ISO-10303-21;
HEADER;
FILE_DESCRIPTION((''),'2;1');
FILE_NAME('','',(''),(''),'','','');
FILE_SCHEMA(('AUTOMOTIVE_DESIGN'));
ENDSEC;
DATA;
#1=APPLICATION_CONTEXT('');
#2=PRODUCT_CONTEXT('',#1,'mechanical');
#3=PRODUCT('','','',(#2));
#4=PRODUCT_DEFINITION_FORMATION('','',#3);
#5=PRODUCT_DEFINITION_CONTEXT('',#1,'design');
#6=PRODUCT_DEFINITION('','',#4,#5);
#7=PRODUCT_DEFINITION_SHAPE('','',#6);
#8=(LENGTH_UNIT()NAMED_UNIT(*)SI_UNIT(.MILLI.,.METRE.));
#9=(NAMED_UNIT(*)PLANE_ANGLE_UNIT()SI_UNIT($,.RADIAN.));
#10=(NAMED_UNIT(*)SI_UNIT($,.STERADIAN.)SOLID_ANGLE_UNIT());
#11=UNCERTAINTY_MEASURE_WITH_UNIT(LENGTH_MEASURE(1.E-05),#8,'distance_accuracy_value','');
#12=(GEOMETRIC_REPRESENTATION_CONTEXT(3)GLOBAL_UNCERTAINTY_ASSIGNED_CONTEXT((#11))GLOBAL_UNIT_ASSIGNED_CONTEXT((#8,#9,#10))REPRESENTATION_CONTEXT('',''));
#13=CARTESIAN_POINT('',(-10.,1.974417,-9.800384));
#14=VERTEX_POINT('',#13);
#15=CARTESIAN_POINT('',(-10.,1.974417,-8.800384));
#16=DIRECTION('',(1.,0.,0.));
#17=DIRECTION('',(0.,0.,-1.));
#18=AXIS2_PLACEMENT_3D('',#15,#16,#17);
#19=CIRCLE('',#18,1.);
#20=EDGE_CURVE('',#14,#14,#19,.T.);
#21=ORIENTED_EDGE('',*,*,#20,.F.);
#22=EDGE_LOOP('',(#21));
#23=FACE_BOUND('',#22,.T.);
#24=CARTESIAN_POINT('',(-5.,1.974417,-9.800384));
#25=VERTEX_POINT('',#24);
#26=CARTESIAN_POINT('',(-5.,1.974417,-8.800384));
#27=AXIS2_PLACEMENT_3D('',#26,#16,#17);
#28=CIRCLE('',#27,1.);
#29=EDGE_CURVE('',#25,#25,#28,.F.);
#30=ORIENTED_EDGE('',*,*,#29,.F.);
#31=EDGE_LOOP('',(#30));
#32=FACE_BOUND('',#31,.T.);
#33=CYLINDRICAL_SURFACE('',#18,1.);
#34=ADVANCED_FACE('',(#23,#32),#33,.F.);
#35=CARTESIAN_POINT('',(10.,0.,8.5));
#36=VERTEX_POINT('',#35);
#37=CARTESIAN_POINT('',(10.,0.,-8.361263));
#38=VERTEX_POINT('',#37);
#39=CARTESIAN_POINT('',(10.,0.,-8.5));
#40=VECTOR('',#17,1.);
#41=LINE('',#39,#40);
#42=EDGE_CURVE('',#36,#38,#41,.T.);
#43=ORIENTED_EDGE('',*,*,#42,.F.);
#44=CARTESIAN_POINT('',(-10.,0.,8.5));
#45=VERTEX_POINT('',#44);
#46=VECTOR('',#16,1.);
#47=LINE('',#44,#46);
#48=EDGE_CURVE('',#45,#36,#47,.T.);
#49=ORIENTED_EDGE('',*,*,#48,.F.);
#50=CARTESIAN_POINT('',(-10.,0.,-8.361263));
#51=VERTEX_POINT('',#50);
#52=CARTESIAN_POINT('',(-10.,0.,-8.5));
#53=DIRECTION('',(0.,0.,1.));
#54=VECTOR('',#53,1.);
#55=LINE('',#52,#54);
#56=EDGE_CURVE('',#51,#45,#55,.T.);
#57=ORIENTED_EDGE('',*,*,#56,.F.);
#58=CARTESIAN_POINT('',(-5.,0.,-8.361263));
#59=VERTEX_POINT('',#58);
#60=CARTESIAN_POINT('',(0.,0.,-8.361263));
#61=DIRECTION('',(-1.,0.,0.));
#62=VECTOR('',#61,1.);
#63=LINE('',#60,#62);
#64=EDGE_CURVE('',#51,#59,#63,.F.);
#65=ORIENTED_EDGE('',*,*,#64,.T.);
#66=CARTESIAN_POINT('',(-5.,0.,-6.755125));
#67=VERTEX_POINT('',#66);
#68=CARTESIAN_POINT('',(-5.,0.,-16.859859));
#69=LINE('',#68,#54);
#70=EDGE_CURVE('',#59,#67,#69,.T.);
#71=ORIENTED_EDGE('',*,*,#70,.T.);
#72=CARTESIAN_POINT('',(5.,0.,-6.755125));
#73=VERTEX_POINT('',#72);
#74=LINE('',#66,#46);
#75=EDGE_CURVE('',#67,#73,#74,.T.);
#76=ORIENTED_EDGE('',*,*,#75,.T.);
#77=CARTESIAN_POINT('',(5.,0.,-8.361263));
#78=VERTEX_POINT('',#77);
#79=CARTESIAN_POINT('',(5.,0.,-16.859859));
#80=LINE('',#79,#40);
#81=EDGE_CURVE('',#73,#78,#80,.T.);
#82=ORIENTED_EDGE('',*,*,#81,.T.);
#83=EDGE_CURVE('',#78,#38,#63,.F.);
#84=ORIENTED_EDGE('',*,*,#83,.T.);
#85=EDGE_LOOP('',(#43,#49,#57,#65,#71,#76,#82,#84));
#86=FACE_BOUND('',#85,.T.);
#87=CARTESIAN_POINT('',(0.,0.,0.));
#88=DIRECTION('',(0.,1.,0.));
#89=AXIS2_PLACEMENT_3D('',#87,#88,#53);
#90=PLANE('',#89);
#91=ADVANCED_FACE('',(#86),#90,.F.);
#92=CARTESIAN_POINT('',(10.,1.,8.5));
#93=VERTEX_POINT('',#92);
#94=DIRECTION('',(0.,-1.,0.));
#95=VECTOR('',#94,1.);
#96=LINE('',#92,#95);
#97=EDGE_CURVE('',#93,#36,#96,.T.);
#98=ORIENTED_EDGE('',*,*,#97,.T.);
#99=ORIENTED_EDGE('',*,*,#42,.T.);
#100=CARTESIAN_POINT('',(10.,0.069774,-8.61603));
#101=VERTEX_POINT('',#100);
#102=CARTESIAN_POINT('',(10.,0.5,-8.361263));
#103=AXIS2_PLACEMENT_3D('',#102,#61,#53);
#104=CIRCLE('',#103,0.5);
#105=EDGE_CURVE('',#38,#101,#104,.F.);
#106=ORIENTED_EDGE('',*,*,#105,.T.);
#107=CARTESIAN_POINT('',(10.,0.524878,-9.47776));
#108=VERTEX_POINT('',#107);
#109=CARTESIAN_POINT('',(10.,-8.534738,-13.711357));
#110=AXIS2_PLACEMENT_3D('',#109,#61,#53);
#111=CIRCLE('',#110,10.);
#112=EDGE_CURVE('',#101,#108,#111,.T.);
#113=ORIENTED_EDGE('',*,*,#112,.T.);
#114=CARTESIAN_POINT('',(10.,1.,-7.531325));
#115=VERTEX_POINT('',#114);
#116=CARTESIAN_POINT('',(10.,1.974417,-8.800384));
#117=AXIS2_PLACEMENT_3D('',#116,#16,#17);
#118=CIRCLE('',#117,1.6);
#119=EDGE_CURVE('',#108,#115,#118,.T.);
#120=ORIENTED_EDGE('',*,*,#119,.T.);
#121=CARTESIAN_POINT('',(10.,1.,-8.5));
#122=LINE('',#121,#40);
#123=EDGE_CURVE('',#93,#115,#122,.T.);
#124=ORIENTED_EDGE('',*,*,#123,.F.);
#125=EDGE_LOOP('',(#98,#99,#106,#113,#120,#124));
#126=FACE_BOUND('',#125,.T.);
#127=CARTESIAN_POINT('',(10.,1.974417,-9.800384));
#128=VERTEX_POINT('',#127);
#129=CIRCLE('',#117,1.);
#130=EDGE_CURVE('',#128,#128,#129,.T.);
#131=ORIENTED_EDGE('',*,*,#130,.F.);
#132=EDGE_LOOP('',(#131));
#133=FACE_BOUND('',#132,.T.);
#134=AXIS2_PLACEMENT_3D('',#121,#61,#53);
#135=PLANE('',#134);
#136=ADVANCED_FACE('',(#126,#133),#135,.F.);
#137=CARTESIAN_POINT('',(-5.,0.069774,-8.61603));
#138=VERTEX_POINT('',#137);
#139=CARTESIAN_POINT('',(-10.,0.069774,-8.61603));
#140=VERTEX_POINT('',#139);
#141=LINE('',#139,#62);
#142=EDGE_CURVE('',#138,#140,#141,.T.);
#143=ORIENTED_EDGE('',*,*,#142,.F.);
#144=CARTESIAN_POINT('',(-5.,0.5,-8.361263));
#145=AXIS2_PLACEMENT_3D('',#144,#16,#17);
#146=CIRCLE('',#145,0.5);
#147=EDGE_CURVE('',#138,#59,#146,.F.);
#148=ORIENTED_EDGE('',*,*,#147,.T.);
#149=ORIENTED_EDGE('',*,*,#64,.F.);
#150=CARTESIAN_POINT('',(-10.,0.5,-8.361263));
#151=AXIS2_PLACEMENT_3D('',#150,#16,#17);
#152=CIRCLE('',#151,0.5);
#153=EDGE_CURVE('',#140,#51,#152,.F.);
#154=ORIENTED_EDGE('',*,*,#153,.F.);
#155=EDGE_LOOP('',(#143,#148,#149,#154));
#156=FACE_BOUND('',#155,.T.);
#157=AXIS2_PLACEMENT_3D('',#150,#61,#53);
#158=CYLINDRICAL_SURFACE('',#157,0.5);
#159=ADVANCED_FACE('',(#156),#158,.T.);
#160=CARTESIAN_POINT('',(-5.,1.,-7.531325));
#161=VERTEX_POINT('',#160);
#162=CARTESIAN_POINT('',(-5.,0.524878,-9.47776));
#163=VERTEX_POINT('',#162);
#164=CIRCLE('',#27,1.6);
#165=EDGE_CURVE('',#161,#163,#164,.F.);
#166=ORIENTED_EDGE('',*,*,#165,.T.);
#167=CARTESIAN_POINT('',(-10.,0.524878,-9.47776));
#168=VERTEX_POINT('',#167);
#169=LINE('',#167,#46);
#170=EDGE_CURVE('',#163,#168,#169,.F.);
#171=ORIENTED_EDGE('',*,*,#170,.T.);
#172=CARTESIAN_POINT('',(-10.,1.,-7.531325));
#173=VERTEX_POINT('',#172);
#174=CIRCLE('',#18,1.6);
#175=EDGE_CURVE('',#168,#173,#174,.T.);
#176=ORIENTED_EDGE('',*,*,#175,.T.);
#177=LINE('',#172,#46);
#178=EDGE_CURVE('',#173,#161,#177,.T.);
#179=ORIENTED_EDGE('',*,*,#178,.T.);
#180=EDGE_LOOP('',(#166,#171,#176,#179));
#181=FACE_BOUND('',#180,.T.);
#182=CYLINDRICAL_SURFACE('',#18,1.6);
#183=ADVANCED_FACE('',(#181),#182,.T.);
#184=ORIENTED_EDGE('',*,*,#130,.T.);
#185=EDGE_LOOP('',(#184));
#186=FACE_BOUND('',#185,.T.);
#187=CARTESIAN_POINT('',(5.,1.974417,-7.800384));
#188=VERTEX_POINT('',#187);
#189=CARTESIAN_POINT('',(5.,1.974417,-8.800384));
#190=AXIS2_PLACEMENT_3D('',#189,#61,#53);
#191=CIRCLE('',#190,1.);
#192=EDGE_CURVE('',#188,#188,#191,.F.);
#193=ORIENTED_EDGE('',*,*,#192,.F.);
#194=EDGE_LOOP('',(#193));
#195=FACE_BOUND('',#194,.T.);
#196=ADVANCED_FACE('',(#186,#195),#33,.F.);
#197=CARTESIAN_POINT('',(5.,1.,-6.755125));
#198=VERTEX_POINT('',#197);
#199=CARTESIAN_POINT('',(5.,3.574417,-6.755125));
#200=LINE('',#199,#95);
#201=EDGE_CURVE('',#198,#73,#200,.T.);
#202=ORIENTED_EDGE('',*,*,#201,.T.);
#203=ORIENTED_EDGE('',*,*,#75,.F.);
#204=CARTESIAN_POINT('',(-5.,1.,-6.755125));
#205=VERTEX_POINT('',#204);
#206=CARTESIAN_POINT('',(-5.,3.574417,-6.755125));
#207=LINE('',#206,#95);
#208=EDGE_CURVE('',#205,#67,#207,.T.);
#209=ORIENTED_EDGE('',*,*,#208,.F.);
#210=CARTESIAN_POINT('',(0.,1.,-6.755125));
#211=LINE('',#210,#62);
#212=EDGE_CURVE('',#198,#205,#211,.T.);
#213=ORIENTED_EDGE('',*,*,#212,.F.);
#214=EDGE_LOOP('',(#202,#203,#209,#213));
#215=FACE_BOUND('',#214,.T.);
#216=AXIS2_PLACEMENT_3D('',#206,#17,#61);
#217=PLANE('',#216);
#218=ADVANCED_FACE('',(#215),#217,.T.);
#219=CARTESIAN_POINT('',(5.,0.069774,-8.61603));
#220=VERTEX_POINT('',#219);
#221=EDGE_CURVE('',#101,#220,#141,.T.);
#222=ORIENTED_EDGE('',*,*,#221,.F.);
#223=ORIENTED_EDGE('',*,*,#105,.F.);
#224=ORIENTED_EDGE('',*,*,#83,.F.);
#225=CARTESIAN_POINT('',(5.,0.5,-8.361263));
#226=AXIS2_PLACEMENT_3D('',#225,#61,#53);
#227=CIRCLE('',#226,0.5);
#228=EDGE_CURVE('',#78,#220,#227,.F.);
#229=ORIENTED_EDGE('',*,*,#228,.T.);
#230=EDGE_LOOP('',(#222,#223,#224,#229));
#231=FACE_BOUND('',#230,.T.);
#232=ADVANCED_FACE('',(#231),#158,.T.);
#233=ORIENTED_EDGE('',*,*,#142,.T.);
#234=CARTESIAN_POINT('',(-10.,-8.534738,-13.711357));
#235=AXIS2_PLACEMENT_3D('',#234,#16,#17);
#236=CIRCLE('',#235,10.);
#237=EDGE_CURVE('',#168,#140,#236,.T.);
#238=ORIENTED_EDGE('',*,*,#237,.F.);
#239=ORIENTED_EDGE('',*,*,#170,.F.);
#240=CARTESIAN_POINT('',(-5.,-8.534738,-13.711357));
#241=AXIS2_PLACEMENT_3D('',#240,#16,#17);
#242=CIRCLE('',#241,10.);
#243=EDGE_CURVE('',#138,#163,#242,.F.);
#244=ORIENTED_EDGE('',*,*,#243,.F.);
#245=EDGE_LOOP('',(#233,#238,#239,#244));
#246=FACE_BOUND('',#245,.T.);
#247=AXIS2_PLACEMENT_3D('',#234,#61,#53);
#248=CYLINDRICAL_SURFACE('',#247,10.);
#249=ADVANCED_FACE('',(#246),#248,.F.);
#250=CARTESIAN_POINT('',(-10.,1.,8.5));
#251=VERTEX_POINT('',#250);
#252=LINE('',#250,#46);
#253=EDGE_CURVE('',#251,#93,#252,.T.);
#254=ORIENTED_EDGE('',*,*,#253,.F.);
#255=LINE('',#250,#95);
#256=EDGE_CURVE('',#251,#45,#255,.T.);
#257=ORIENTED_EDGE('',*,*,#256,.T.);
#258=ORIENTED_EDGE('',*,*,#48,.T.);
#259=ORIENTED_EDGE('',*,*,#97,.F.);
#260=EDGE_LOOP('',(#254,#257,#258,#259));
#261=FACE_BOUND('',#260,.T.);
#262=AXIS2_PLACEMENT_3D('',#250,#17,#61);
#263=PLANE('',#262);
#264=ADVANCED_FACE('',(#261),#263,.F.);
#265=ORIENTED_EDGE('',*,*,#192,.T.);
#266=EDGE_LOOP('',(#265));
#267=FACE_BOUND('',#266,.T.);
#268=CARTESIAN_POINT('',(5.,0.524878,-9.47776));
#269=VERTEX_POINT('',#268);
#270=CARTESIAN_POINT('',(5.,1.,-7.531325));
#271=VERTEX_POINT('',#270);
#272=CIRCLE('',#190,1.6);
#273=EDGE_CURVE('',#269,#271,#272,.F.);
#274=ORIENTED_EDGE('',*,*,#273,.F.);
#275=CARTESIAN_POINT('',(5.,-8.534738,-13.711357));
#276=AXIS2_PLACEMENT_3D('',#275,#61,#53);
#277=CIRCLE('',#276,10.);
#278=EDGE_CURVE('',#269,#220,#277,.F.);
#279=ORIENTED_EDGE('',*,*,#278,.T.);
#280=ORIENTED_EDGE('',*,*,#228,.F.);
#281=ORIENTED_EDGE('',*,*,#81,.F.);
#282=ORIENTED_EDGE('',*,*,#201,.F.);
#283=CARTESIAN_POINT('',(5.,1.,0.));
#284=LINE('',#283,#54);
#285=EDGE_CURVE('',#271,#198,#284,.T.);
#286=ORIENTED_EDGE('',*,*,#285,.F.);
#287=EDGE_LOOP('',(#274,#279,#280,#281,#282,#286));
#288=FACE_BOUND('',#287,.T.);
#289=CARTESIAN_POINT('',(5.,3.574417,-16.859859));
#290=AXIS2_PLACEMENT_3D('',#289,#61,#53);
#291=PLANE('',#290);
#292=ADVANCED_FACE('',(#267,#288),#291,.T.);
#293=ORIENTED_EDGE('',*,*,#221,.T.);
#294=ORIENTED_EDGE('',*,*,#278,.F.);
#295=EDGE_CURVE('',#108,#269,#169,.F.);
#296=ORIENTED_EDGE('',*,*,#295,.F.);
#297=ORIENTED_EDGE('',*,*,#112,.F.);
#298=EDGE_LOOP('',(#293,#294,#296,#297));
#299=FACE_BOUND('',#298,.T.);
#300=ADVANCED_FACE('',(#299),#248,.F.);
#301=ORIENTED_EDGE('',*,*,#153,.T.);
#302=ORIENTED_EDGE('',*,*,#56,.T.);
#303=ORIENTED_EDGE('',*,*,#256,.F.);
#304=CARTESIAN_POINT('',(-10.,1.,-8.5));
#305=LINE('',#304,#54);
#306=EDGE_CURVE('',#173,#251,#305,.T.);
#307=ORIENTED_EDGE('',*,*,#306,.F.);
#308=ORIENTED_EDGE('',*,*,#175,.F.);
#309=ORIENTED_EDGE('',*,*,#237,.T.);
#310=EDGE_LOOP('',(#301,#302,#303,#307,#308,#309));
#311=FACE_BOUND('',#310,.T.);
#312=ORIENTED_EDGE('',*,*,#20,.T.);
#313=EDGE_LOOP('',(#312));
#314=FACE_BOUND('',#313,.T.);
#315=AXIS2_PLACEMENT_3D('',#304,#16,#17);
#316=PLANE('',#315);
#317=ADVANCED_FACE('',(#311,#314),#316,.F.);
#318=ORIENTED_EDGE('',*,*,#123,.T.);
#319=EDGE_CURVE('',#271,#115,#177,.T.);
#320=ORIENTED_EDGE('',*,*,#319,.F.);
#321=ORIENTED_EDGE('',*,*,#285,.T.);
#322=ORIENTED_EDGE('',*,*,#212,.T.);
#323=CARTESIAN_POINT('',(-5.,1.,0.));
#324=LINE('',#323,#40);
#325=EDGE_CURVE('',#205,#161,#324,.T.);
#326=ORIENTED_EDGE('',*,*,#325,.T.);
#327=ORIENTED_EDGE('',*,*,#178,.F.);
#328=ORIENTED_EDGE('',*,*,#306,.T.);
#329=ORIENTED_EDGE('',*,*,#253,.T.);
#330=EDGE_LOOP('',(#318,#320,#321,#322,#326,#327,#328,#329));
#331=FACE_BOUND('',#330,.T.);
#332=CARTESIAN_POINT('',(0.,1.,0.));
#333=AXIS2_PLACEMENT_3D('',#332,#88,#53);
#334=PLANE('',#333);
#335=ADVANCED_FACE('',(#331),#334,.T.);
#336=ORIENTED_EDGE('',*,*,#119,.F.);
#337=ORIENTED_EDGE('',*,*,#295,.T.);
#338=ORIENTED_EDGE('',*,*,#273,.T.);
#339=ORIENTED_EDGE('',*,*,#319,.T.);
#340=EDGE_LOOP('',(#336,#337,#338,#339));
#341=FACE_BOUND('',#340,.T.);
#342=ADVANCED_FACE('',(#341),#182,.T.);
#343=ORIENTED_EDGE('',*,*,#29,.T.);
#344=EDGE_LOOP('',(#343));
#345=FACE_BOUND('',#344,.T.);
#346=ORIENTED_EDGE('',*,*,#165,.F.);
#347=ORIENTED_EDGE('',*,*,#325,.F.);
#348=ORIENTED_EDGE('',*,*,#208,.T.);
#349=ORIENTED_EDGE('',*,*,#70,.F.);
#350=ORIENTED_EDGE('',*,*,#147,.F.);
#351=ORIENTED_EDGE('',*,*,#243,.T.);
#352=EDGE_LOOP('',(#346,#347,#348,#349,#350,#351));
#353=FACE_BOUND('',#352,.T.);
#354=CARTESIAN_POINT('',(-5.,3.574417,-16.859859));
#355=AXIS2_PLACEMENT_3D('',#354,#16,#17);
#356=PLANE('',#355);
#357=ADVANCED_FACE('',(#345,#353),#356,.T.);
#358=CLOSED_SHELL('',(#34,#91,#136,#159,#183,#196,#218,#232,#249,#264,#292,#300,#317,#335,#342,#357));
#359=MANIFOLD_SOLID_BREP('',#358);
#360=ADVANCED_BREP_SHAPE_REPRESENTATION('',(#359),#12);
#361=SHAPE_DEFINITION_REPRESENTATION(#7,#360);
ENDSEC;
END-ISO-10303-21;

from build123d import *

# Parameters (mm, degrees)
SKETCH1_W           = 20
SKETCH1_H           = 17
BOSS_EXTRUDE1_DEPTH = 1
SKETCH2_R           = 1.6
SKETCH2_R_2         = 1
BOSS_EXTRUDE2_DEPTH = 20
FILLET1_R           = 10
FILLET2_R           = 0.5
SKETCH4_W           = 10
SKETCH4_H           = 10.104734337
CUT_EXTRUDE3_DEPTH  = 15.86420015


with BuildPart() as part:
    # Sketch1 → Boss-Extrude1 (new body)
    with BuildSketch(Plane(origin=(0, 0, 0), x_dir=(1, 0, 0), z_dir=(0, 1, 0))):
        Rectangle(SKETCH1_W, SKETCH1_H)
    extrude(amount=BOSS_EXTRUDE1_DEPTH)

    # Sketch2 → Boss-Extrude2 (add)
    with BuildSketch(Plane(origin=(10, 0, 0), x_dir=(0, 0, -1), z_dir=(1, 0, 0))):
        with Locations((8.800384095, 1.974416987)):
            Circle(SKETCH2_R)
        with Locations((8.800384095, 1.974416987)):
            Circle(SKETCH2_R_2, mode=Mode.SUBTRACT)
    extrude(amount=-BOSS_EXTRUDE2_DEPTH)

    # Fillet1
    # the kernel refuses this fillet: 10 mm, written as the material it adds along each edge
    with BuildSketch(Plane(origin=(-10, 0.402866989, -8.5), x_dir=(0, -1, 0), z_dir=(1, 0, 0))) as fillet1_piece_1:
        with BuildLine():
            CenterArc((8.937605274, 5.21135706), FILLET1_R, 205.046884286, 6.361578996)
            Line((-0.12201134, 0.977759676), (-0.303203672, 0.893087728))
            ThreePointArc((-0.303203672, 0.893087728), (-0.18232452, 0.473740867), (-0.19644375, 0.037548012))
            Line((-0.19644375, 0.037548012), (0, -0.2))
            ThreePointArc((0, -0.2), (0.201433495, -0.2), (0.232172223, -0.104227141))
            Line((0.232172223, -0.104227141), (0.402866989, 0))
        make_face()
    extrude(amount=20)

    # Fillet2
    fillet2_edges = [part.edges().sort_by_distance(p)[0] for p in [
        (0, 0, -8.5),
    ]]
    fillet(fillet2_edges, radius=FILLET2_R)

    # Sketch4 → Cut-Extrude3 (cut, through all)
    with BuildSketch(Plane(origin=(0, 0, 0), x_dir=(1, 0, 0), z_dir=(0, 1, 0))):
        with Locations((0, 11.80749184)):
            Rectangle(SKETCH4_W, SKETCH4_H)
    extrude(amount=CUT_EXTRUDE3_DEPTH, mode=Mode.SUBTRACT)


solid = part.part
